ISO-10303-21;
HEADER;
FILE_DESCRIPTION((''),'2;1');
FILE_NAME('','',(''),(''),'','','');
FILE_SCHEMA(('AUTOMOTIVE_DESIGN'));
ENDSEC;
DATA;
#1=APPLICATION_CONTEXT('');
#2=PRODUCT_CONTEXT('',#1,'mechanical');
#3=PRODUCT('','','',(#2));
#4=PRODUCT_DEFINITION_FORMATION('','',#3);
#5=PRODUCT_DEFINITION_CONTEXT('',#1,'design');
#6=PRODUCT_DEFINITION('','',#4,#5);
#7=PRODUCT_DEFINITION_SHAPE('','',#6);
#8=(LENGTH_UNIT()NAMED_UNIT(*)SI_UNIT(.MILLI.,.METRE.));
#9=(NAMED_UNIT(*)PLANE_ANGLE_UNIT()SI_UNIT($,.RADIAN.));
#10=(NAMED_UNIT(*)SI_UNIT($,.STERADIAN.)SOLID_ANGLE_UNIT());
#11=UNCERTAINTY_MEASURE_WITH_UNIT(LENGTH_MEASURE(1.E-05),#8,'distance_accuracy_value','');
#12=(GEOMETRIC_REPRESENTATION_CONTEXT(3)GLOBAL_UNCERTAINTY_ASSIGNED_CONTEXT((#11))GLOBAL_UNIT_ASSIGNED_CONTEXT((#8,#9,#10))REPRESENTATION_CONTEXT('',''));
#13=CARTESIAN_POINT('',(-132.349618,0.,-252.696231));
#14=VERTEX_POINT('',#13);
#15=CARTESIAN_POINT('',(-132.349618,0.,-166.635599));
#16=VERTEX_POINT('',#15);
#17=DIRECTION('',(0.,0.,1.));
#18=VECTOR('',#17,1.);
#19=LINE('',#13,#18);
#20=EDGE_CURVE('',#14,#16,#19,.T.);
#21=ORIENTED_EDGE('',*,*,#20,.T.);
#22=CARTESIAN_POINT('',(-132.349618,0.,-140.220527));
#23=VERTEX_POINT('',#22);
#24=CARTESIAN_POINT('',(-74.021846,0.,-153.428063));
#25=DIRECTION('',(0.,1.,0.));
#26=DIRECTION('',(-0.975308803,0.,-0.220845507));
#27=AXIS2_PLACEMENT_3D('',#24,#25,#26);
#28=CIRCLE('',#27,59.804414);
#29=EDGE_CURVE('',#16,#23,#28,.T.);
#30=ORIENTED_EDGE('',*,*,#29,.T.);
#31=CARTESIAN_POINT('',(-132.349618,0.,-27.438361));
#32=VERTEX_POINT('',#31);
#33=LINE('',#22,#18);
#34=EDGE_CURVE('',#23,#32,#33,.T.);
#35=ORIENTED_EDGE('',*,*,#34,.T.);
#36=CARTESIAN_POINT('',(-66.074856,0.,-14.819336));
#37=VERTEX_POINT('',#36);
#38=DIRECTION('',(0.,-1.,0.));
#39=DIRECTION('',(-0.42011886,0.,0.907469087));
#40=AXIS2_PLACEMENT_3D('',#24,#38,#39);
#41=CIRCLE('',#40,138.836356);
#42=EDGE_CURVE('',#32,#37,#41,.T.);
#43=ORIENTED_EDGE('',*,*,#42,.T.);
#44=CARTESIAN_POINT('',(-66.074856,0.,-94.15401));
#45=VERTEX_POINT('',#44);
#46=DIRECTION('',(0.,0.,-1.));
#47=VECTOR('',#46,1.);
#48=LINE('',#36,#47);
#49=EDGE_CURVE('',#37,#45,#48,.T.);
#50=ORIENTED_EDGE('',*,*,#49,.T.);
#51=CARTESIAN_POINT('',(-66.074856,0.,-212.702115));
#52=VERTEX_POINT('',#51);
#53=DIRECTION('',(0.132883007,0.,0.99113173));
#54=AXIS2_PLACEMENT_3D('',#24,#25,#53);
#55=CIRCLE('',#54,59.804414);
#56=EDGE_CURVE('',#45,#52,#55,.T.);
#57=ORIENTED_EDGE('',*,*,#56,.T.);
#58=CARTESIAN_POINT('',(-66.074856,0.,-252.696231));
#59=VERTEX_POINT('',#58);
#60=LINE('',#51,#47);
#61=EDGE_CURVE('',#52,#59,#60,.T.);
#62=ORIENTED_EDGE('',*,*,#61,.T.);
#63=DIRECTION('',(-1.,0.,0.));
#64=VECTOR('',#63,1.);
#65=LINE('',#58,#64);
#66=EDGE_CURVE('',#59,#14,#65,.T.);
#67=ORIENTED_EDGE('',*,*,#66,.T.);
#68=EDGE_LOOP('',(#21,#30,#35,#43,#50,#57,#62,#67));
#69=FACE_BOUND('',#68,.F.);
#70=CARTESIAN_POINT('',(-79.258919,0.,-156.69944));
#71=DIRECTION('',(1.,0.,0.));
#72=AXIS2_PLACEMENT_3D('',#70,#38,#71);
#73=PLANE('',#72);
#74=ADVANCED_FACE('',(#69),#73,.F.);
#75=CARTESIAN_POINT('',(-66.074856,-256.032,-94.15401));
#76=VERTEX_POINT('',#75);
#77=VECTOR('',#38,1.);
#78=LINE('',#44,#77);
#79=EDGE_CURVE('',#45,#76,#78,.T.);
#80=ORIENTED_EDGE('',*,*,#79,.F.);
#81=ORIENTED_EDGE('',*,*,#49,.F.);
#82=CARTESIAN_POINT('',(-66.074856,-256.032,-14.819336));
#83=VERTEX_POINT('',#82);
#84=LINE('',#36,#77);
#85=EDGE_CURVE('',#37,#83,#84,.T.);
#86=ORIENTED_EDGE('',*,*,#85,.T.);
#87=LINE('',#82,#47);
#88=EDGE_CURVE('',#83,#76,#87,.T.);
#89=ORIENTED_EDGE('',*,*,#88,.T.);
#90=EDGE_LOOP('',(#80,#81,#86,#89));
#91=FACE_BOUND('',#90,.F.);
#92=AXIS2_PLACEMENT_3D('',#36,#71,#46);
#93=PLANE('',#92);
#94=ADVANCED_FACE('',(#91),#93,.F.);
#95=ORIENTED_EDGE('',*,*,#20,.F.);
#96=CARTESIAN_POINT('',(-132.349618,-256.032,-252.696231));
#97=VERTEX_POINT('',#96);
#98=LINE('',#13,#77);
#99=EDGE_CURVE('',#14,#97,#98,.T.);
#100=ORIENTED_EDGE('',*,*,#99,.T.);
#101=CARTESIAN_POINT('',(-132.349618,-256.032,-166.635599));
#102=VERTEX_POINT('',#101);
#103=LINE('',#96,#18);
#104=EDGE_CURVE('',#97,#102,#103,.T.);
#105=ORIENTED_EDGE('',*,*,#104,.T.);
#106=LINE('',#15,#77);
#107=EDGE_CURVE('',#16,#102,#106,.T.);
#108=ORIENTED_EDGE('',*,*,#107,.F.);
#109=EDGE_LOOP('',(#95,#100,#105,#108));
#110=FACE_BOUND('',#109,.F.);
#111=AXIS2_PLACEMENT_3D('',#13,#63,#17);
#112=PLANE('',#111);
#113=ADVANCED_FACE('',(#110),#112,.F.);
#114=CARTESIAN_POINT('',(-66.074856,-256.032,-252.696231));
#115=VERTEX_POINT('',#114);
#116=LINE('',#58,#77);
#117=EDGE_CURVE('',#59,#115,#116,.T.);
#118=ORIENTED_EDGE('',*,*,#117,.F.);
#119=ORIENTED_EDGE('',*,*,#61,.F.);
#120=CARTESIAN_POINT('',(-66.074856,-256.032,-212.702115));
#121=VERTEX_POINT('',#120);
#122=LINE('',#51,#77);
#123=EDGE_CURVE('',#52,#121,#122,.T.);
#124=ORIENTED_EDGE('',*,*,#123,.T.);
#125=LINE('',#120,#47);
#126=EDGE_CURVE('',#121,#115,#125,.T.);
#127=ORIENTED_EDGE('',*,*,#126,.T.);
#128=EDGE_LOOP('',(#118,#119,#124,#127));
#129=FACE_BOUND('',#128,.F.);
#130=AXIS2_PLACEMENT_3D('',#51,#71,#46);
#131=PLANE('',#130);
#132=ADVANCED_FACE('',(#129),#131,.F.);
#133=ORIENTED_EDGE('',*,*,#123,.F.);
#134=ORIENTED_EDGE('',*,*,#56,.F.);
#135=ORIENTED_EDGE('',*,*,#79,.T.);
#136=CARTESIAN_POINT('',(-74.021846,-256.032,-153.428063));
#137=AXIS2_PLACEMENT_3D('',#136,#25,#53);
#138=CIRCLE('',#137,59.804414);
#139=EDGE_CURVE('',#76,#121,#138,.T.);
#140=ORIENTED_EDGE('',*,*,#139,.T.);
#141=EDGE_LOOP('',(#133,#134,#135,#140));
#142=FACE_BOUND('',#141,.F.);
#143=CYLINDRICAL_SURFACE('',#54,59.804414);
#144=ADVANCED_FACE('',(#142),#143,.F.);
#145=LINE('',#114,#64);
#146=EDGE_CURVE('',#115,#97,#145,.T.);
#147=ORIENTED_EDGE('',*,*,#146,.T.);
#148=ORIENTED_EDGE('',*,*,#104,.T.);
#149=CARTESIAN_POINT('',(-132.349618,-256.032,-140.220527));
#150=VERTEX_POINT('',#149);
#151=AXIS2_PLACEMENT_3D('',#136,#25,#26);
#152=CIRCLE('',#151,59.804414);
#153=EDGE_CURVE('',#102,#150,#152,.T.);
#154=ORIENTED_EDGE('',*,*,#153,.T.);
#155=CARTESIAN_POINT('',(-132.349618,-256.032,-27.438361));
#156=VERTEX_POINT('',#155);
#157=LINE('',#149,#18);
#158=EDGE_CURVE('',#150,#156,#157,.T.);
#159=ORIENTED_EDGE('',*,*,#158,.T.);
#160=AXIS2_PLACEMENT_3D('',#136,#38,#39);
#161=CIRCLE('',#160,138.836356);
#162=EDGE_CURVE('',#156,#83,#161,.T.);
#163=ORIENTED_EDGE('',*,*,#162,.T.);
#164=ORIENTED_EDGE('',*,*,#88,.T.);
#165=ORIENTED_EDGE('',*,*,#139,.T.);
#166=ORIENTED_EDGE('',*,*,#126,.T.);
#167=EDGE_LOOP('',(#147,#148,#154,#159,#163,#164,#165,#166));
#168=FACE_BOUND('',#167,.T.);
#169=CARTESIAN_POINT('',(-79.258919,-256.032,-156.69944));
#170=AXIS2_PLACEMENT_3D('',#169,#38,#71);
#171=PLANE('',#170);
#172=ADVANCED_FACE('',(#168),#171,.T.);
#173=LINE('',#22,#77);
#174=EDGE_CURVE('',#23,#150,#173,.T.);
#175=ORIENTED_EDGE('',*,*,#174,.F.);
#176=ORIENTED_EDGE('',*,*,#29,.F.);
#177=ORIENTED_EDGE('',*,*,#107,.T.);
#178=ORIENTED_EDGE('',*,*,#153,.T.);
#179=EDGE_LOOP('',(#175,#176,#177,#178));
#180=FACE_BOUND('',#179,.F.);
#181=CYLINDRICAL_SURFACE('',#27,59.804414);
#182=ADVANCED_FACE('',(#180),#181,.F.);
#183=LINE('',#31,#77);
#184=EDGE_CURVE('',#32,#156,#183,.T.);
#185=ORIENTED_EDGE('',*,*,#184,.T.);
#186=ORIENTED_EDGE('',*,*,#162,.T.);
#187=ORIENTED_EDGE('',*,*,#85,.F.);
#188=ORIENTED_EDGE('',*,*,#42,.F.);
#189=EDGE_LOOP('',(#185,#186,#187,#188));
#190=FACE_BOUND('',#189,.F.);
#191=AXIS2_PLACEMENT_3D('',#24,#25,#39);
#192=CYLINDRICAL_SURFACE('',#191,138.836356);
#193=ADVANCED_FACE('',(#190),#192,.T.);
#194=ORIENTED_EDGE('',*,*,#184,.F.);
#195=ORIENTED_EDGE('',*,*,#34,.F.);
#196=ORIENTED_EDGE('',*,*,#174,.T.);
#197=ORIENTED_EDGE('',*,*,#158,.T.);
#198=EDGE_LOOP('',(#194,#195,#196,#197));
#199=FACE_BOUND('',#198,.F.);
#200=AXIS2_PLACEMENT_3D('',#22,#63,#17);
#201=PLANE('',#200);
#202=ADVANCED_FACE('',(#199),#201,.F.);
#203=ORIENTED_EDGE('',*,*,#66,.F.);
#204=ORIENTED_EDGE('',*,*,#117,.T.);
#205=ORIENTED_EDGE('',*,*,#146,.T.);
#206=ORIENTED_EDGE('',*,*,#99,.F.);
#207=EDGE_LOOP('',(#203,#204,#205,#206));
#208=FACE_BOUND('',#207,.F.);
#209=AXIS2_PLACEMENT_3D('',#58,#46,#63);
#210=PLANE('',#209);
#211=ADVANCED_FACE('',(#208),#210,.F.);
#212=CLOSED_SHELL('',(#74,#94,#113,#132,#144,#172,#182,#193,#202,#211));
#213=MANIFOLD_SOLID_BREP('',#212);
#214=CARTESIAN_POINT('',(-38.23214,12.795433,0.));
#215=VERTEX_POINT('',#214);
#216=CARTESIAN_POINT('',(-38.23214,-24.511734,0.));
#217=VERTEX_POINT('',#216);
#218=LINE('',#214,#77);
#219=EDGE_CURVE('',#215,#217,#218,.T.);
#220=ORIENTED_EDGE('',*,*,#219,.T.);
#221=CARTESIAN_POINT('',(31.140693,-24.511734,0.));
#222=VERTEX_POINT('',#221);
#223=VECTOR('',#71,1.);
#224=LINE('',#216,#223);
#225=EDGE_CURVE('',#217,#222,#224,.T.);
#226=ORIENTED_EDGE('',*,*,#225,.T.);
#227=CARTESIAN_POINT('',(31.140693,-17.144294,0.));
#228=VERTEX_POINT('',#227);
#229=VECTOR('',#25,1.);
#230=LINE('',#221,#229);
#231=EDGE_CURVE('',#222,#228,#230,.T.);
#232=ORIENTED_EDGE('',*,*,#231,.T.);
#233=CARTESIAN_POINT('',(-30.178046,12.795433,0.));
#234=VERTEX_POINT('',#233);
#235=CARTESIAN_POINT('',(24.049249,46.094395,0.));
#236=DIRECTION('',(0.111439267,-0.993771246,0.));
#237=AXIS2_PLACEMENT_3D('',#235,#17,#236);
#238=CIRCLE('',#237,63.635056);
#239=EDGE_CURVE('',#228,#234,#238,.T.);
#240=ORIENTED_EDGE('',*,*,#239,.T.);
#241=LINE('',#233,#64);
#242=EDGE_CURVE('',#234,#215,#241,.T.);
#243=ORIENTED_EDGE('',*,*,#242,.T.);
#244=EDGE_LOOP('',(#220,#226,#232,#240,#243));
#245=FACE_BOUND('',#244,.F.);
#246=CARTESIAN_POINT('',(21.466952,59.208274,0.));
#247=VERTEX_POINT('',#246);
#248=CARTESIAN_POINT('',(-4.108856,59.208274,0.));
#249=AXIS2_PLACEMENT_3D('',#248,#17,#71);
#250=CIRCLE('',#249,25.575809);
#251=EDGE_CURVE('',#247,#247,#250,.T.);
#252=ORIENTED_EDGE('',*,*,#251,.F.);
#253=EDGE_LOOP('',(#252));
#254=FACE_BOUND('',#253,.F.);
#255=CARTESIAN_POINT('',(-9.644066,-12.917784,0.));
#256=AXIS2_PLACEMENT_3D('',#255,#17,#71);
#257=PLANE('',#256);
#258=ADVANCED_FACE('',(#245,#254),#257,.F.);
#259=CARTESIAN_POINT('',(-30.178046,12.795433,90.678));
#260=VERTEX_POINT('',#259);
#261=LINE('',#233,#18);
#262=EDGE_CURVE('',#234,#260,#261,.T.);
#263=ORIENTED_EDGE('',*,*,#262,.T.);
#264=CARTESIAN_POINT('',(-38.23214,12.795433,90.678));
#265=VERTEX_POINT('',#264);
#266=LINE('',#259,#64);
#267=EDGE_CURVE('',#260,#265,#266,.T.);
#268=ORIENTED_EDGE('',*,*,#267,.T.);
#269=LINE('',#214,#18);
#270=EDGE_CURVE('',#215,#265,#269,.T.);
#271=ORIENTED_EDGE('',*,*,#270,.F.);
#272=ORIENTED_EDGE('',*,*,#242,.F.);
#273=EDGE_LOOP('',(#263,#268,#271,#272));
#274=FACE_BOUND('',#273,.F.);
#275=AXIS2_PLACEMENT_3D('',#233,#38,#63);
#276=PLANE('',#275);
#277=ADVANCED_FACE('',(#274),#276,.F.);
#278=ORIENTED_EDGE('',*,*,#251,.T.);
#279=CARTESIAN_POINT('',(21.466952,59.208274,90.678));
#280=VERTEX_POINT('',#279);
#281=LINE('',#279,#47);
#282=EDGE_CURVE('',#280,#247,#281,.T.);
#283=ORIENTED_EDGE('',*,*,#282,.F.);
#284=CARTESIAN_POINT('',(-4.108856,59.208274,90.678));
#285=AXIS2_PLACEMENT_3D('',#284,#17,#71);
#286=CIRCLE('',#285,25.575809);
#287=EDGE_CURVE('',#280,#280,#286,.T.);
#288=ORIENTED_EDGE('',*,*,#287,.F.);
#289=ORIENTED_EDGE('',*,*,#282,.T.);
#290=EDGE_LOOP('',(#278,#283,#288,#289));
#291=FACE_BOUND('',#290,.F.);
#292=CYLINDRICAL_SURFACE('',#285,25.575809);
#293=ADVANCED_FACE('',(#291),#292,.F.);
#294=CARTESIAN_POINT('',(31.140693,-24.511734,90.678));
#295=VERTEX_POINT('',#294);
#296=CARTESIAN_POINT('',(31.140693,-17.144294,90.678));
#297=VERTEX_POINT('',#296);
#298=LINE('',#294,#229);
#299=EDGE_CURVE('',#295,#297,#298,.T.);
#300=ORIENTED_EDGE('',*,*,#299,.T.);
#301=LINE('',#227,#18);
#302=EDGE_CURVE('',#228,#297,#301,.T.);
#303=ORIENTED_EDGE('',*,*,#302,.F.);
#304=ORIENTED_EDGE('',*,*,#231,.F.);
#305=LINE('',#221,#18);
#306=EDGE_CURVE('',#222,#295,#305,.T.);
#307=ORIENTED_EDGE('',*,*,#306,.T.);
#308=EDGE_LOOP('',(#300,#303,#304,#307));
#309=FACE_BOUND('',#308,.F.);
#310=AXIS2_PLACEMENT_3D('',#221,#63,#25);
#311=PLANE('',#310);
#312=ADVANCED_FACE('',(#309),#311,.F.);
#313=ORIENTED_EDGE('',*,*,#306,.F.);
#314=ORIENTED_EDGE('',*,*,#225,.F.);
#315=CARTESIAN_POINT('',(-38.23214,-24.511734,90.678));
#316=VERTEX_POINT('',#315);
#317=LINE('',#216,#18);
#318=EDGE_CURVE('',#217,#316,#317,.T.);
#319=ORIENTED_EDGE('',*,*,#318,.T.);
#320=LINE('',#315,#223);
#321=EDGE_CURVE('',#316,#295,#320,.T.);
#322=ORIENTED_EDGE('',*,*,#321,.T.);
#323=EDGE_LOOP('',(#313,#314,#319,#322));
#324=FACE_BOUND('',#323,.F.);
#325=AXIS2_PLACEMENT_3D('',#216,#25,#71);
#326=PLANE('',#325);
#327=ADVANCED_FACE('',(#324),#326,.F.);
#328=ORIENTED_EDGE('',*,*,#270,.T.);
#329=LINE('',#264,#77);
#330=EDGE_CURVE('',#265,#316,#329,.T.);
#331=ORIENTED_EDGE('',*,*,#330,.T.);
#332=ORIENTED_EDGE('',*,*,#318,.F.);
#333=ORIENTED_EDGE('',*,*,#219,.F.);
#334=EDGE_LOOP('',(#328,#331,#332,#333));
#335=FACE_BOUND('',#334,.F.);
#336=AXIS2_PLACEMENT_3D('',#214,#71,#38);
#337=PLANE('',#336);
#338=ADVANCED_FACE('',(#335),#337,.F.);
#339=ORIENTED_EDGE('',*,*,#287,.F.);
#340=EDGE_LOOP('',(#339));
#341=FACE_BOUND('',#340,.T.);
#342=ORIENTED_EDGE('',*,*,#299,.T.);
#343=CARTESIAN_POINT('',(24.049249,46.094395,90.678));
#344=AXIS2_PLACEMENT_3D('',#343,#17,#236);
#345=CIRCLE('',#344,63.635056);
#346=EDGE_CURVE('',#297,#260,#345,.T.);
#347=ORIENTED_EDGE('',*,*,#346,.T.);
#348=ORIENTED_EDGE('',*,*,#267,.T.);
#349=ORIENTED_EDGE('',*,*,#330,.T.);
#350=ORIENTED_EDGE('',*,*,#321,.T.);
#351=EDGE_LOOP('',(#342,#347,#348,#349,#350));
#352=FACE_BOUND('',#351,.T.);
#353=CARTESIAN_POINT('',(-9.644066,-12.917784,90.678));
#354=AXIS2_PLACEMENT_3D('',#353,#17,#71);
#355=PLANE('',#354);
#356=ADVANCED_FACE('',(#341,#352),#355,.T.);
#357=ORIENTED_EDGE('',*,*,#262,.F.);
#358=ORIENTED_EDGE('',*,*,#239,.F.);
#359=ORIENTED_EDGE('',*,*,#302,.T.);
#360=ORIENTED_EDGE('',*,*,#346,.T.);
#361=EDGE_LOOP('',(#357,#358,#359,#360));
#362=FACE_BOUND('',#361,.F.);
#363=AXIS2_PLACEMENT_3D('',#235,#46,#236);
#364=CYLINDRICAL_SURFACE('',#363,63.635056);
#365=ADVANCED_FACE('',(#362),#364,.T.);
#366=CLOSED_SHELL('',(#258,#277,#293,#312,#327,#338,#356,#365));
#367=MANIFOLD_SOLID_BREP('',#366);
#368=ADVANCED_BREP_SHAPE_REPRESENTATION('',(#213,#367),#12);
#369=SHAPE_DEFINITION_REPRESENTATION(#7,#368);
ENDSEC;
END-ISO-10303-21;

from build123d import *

# Parameters (mm, degrees)
F1_DEPTH = 90.678
F2_R     = 25.5758086302
F3_DEPTH = 141.732
F5_DEPTH = 256.032


# Not quite as in the source:
# - the program builds the solid bodies; features that only make, move or delete a surface that nothing else refers to are left out


with BuildPart() as f1:
    # F0 (on Top) → F1 (new body)
    with BuildSketch(Plane.XY):
        with BuildLine():
            Line((-30.178046057, 12.7954334021), (-38.2321402431, 12.7954334021))
            Line((-38.2321402431, 12.7954334021), (-38.2321402431, -24.5117340237))
            Line((-38.2321402431, -24.5117340237), (31.1406925321, -24.5117340237))
            Line((31.1406925321, -24.5117340237), (31.1406925321, -17.1442935736))
            ThreePointArc((31.1406925321, -17.1442935736), (-3.8710651375, -11.08843806), (-30.178046057, 12.7954334021))
        make_face()
        with BuildLine():
            ThreePointArc((87.6843044367, 46.0943952203), (6.7480431649, 107.3323624507), (-30.178046057, 12.7954334021))
            Line((-30.178046057, 12.7954334021), (31.1406925321, 12.7954334021))
            Line((31.1406925321, 12.7954334021), (31.1406925321, -17.1442935736))
            ThreePointArc((31.1406925321, -17.1442935736), (71.4870223798, 3.6788561821), (87.6843044367, 46.0943952203))
        make_face()
        with BuildLine():
            Line((31.1406925321, 12.7954334021), (-30.178046057, 12.7954334021))
            ThreePointArc((-30.178046057, 12.7954334021), (-3.8710651375, -11.08843806), (31.1406925321, -17.1442935736))
            Line((31.1406925321, -17.1442935736), (31.1406925321, 12.7954334021))
        make_face()
    extrude(amount=F1_DEPTH)

    # F2 (on face) → F3 (cut)
    with BuildSketch(Plane.XY.offset(90.678)):
        with Locations((-4.1088564321, 59.2082738876)):
            Circle(F2_R)
    extrude(amount=-F3_DEPTH, mode=Mode.SUBTRACT)


with BuildPart() as f5:
    # F4 (on Front) → F5 (new body)
    with BuildSketch(Plane.XZ):
        with BuildLine():
            ThreePointArc((64.8145101963, -153.4280627966), (26.9208728789, -58.1070194145), (-66.0748556256, -14.819335941))
            Line((-66.0748556256, -14.819335941), (-66.0748556256, -94.1540102087))
            ThreePointArc((-66.0748556256, -94.1540102087), (-29.0116634578, -114.0497511318), (-14.2174317784, -153.4280627966))
            ThreePointArc((-14.2174317784, -153.4280627966), (-29.0116634578, -192.8063744613), (-66.0748556256, -212.7021153845))
            Line((-66.0748556256, -212.7021153845), (-66.0748556256, -252.6962310076))
            Line((-66.0748556256, -252.6962310076), (-132.3496177793, -252.6962310076))
            Line((-132.3496177793, -252.6962310076), (-132.3496177793, -166.6355990123))
            ThreePointArc((-132.3496177793, -166.6355990123), (-133.8262603336, -153.4280627966), (-132.3496177793, -140.2205265809))
            Line((-132.3496177793, -140.2205265809), (-132.3496177793, -27.4383613793))
            ThreePointArc((-132.3496177793, -27.4383613793), (-148.7798507212, -270.4185519652), (64.8145101963, -153.4280627966))
        make_face()
    extrude(amount=F5_DEPTH)


solid = Compound([f1.part, f5.part])
